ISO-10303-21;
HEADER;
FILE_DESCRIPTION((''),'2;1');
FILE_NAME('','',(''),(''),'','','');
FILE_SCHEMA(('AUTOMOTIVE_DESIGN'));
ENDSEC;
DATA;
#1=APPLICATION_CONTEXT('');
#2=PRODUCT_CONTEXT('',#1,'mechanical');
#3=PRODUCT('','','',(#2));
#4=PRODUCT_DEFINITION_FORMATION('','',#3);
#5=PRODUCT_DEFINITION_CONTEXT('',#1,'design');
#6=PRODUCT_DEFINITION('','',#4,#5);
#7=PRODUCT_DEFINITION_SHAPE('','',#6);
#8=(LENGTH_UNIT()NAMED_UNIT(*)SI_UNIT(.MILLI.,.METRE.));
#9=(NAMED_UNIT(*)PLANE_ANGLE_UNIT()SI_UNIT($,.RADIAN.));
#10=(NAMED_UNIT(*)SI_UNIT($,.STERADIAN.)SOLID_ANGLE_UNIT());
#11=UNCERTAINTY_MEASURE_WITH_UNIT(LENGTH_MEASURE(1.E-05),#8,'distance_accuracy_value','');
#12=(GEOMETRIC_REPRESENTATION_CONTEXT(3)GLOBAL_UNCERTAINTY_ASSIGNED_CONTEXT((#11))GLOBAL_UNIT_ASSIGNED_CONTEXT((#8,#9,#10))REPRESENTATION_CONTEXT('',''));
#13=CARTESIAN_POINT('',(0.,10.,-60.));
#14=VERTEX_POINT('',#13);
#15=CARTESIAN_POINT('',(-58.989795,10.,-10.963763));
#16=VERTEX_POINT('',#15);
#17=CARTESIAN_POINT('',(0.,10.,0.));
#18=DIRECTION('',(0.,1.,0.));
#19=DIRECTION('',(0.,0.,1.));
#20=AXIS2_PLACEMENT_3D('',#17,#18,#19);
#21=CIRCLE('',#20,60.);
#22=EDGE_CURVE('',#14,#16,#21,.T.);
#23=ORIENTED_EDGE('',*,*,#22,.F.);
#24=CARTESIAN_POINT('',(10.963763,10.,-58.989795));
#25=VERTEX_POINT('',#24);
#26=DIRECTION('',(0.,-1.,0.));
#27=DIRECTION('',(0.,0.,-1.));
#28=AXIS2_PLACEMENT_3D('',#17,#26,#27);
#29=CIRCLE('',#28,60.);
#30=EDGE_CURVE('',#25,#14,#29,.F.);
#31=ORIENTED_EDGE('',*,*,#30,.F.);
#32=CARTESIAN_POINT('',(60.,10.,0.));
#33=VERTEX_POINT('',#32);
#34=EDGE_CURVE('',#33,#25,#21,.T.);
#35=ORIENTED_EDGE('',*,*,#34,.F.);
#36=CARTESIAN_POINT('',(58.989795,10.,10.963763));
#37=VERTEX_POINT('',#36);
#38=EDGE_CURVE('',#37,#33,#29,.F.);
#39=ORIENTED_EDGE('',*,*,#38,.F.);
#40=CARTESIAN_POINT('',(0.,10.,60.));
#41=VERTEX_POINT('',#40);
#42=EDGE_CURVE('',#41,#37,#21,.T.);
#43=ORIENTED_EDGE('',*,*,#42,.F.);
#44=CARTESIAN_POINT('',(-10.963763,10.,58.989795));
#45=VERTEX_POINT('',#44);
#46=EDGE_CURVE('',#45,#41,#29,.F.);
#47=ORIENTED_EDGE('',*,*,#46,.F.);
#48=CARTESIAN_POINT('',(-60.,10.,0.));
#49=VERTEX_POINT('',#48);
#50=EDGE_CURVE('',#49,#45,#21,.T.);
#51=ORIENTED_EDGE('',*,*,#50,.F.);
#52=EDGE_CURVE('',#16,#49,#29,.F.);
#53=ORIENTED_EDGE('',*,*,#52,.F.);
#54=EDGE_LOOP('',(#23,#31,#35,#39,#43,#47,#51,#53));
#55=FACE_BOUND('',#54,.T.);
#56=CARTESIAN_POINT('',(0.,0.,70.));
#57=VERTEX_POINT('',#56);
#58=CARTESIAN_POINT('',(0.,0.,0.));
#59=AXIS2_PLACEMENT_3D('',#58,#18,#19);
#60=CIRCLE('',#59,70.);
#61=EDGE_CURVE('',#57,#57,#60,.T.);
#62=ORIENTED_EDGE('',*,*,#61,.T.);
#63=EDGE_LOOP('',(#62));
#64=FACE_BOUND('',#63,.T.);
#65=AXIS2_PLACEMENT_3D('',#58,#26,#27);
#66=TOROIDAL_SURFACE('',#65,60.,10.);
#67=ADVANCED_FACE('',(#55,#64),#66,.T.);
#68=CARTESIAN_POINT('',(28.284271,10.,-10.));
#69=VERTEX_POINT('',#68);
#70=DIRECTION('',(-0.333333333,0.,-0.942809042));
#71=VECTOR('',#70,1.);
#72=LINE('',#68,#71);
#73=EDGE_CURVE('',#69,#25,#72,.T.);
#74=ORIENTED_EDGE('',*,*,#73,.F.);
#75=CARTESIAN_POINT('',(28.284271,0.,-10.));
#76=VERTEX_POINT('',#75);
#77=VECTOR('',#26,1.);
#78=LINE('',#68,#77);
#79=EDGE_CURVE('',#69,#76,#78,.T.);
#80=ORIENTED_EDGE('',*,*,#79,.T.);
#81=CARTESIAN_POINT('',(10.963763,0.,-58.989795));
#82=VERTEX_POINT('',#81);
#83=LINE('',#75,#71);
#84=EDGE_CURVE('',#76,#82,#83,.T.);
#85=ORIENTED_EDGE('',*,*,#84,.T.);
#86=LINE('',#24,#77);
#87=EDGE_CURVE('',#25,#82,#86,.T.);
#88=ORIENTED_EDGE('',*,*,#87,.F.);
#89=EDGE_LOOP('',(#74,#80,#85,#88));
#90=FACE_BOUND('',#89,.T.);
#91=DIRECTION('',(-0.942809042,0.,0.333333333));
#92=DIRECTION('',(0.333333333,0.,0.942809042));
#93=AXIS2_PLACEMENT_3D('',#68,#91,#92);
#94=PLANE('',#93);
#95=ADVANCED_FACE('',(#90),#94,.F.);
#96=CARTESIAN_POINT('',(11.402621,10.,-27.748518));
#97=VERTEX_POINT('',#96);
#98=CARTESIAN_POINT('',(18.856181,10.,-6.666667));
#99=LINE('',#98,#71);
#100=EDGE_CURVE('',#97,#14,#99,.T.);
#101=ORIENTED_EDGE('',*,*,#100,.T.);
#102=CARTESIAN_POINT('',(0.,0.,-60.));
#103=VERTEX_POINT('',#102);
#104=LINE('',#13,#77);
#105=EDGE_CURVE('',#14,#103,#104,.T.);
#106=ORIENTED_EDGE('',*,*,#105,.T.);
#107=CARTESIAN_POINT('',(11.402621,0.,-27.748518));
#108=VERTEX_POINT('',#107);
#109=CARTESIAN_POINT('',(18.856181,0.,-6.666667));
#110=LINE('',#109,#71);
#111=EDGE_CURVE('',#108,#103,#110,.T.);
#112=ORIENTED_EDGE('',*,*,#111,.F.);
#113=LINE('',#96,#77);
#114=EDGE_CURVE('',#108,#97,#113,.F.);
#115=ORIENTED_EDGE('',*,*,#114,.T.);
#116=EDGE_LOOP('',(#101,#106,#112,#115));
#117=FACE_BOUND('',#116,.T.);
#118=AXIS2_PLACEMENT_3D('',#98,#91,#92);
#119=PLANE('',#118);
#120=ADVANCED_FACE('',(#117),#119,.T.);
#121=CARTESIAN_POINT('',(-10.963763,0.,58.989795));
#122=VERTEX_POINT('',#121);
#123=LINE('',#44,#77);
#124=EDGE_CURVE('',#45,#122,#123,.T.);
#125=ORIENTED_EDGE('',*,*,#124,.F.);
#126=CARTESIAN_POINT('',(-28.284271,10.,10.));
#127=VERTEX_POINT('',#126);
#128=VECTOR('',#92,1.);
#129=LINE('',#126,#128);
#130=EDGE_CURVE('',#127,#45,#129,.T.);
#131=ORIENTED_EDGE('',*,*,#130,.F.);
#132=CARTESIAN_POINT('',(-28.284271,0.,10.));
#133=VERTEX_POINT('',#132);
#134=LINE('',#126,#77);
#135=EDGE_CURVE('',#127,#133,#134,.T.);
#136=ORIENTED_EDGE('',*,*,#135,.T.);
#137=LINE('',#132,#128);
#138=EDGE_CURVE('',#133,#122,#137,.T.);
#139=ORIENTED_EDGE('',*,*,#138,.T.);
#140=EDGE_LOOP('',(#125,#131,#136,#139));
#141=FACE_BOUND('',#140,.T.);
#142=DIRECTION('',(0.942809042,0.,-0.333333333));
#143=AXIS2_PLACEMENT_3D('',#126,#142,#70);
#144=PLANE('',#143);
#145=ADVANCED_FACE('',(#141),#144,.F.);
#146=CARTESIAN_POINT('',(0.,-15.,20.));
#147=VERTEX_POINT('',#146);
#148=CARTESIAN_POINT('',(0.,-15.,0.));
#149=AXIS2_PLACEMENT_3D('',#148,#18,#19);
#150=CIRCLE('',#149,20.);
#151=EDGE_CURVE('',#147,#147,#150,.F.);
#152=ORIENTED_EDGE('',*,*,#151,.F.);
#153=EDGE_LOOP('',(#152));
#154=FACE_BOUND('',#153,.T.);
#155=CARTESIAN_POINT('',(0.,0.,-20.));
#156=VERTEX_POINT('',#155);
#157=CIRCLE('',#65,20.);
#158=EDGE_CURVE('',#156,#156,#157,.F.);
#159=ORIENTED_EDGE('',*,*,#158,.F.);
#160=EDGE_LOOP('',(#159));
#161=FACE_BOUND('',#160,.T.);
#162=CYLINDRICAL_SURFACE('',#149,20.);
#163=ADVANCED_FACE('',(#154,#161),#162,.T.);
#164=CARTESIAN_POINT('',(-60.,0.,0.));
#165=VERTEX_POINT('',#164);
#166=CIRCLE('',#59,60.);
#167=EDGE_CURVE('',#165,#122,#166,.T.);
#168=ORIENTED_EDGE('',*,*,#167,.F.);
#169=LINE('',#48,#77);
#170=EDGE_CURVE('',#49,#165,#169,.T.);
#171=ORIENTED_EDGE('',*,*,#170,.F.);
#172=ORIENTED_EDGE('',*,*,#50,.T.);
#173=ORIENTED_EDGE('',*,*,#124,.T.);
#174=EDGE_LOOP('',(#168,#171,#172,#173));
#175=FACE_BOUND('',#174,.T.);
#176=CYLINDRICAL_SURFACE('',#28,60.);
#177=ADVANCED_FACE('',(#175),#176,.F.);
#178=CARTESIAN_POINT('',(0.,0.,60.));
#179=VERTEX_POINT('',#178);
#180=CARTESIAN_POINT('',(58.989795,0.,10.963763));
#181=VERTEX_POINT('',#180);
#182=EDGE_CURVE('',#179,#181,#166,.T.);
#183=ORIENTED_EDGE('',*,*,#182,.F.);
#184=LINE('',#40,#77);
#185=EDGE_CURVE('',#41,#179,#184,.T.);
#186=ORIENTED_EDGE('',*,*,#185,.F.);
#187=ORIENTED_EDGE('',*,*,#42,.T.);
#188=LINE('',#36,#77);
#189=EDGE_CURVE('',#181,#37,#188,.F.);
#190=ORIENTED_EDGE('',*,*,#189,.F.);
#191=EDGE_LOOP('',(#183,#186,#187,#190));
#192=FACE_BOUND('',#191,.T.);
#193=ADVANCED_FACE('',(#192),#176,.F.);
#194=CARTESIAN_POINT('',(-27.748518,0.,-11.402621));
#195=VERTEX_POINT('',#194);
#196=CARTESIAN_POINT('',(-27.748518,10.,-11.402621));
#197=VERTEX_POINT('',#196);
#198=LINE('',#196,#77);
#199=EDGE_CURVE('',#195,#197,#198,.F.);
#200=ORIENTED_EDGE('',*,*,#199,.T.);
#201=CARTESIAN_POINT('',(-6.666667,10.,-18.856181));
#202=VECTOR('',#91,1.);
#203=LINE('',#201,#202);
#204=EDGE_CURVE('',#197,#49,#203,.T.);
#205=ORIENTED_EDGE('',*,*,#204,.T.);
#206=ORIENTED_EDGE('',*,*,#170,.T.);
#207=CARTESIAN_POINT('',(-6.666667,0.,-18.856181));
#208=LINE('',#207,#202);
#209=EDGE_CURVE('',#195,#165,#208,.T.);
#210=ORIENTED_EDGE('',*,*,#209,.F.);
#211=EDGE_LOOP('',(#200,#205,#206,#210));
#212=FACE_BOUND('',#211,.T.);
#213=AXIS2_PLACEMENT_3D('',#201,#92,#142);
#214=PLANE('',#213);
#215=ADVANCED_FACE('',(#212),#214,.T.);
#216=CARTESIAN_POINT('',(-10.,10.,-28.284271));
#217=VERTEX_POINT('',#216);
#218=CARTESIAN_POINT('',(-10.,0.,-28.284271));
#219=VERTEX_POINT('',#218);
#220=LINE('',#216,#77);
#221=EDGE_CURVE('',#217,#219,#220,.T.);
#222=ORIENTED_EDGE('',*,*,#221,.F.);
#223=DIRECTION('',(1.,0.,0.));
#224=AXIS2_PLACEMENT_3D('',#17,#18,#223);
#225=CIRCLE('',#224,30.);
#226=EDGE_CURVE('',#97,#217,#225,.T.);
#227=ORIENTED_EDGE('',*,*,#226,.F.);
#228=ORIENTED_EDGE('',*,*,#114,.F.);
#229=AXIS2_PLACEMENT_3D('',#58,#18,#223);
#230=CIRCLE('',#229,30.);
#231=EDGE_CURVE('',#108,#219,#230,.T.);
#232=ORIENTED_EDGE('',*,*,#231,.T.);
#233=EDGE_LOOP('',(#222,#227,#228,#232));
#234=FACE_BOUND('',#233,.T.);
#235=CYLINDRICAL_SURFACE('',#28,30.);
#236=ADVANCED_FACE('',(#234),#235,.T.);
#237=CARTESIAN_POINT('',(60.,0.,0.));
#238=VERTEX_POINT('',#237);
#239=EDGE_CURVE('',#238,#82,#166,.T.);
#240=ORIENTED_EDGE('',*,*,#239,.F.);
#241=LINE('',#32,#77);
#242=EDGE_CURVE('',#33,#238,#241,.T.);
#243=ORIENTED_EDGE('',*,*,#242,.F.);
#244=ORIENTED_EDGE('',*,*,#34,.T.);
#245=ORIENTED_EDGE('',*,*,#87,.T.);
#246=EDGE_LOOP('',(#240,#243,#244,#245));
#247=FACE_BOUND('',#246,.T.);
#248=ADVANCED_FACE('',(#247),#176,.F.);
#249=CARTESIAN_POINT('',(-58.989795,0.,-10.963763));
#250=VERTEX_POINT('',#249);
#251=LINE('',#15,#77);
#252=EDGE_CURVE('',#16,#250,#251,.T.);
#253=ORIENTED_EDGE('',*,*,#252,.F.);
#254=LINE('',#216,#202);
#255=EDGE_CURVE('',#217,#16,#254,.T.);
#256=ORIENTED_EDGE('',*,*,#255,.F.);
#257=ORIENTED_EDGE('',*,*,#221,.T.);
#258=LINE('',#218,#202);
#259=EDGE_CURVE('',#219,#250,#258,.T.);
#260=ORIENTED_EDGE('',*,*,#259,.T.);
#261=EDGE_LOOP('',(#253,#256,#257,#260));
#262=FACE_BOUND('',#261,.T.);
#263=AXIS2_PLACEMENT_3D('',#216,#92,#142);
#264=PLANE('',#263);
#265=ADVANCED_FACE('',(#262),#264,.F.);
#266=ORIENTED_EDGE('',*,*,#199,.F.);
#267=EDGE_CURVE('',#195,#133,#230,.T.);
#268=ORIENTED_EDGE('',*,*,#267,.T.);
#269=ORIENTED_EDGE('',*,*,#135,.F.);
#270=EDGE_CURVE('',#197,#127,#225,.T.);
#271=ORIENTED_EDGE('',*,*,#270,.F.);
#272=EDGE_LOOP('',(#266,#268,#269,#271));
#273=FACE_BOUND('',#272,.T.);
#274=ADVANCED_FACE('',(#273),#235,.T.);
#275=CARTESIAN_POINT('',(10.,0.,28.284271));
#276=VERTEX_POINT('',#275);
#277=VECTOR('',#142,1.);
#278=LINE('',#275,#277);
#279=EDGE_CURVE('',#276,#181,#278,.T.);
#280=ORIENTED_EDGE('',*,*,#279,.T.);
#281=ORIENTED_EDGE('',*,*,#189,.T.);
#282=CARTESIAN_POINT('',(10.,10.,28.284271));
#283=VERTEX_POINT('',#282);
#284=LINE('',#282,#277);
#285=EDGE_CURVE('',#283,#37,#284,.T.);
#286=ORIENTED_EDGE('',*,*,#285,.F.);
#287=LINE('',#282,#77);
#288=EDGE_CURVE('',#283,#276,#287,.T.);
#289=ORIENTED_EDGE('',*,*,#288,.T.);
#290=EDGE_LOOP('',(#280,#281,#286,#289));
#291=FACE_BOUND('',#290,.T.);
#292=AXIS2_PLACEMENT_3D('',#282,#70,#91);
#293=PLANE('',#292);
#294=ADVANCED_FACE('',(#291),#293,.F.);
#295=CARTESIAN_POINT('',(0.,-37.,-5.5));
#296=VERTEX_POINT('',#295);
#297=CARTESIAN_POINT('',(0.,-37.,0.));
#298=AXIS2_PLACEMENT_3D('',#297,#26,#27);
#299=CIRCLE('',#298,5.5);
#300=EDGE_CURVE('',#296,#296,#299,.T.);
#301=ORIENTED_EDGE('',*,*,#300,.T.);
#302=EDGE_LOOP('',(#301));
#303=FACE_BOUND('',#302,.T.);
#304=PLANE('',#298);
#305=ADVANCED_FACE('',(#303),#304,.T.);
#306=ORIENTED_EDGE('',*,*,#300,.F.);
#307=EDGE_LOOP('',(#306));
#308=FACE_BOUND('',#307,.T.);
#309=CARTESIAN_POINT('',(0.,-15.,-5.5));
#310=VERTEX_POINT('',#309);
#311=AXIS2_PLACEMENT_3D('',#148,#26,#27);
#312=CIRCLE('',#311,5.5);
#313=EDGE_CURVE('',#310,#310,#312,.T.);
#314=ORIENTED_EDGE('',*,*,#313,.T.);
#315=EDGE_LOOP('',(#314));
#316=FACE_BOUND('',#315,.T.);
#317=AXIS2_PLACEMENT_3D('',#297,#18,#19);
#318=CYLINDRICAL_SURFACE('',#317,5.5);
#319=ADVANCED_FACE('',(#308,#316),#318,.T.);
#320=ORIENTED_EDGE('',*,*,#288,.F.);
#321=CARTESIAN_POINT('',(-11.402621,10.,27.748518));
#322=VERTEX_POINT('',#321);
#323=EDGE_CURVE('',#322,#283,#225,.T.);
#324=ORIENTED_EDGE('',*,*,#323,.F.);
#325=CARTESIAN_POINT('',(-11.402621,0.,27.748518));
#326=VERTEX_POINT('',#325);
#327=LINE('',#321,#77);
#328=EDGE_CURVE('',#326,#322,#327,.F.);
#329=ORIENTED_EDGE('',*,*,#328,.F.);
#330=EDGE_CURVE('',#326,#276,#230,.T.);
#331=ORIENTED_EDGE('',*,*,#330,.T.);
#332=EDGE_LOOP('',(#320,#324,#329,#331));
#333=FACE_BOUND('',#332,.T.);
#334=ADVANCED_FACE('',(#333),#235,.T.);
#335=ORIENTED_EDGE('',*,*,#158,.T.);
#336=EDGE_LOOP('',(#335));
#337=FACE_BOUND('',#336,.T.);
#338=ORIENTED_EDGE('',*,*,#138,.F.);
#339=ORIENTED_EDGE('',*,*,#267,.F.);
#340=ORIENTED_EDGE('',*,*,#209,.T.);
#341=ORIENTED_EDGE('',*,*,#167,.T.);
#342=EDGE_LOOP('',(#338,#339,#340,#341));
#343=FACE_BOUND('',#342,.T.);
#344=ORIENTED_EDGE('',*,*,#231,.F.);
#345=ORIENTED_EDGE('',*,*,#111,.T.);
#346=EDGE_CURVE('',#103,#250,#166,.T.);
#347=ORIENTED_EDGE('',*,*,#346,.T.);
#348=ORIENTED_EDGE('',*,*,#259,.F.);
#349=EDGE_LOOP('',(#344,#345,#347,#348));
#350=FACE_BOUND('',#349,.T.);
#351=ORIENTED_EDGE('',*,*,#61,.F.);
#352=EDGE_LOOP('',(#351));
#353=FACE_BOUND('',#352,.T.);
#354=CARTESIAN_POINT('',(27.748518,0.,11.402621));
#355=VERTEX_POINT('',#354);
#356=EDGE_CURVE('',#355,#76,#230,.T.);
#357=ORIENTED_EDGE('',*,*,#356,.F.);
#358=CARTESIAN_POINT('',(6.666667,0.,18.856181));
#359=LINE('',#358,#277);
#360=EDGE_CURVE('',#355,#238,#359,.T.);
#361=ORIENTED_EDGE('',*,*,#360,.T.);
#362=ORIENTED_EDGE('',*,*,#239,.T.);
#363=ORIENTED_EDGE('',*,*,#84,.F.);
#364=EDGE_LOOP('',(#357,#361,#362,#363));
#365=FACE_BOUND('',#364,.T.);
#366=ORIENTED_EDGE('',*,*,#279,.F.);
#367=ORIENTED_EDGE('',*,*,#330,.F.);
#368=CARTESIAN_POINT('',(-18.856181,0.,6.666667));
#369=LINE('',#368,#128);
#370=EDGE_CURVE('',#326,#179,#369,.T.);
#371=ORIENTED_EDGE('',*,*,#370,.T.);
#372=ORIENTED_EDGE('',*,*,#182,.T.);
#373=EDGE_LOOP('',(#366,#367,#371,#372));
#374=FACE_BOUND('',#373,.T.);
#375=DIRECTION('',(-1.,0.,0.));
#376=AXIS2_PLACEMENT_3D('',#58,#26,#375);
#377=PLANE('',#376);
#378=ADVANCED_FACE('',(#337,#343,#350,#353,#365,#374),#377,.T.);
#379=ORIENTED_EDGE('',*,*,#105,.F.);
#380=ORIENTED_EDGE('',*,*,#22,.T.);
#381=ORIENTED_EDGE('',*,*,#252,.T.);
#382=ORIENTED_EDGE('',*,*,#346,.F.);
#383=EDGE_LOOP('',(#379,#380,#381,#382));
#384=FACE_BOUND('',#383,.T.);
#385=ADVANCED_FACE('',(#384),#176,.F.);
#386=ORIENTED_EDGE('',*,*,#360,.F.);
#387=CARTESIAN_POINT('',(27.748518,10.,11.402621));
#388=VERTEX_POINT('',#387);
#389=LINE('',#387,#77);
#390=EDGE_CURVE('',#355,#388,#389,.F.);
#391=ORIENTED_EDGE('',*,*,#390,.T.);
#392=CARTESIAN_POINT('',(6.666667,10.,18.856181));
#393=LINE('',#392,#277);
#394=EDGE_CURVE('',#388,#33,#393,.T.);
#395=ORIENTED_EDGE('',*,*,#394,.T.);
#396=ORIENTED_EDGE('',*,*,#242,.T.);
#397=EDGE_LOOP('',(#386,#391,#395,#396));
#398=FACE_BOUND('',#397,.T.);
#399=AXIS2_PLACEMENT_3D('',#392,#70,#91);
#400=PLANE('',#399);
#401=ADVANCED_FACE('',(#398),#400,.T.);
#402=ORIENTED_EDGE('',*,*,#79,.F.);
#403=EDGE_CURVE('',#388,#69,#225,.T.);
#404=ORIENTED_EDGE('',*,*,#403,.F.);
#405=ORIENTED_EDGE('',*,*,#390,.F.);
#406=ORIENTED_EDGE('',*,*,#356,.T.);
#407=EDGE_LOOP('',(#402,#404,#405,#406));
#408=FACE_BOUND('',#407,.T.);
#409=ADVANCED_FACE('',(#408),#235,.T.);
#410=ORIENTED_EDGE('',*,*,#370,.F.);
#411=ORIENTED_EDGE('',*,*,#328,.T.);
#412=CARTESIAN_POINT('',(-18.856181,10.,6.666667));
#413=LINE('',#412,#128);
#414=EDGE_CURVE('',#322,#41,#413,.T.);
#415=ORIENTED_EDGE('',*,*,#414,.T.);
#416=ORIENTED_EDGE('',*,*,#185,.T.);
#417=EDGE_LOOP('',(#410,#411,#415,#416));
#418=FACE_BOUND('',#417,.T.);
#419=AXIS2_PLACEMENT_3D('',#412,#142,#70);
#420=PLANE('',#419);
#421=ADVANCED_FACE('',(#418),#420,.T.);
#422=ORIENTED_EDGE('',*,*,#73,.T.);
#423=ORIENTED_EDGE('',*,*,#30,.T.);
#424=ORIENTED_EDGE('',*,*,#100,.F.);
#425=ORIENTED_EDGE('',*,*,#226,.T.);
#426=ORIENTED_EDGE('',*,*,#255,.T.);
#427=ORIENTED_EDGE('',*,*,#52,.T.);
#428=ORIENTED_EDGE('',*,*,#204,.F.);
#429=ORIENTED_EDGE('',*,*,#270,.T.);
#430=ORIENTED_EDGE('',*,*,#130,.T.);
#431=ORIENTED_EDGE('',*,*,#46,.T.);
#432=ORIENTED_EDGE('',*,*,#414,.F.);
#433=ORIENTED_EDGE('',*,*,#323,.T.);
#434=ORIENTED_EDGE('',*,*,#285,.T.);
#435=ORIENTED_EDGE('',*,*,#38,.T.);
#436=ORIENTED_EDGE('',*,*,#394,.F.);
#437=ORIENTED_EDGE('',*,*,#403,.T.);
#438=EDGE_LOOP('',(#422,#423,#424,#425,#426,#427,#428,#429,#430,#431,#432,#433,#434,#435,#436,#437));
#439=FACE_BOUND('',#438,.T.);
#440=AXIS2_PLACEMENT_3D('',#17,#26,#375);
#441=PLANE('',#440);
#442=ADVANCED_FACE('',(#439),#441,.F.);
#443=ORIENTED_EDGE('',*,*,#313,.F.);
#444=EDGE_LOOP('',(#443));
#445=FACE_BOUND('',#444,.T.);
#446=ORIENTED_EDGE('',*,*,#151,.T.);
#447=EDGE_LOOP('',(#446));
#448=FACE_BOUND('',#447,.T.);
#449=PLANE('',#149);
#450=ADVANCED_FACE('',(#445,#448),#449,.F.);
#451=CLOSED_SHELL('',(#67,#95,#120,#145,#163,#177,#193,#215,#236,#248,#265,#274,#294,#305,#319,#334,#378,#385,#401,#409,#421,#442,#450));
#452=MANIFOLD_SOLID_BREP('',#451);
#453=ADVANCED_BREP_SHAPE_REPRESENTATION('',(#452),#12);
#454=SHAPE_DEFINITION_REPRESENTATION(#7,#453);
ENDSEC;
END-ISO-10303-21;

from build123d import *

# Parameters (mm, degrees)
SKETCH5_R           = 30
SKETCH5_R_2         = 20
EXTRUDE_THIN2_DEPTH = 10
SKETCH2_R           = 70
SKETCH2_R_2         = 60
BOSS_EXTRUDE3_DEPTH = 10
CIRPATTERN1_COUNT   = 4
BOSS_EXTRUDE4_START = -25
SKETCH6_R           = 20
BOSS_EXTRUDE4_DEPTH = 25
FILLET2_R           = 10
SKETCH7_R           = 5.5
BOSS_EXTRUDE5_DEPTH = 22


with BuildPart() as part:
    # Sketch5 → Extrude-Thin2 (new body)
    # profile 1 of 2: a face of its own
    with BuildSketch(Plane(origin=(0, 0, 0), x_dir=(1, 0, 0), z_dir=(0, 1, 0))):
        Circle(SKETCH5_R)
        Circle(SKETCH5_R_2, mode=Mode.SUBTRACT)
    # profile 2 of 2: a face of its own
    with BuildSketch(Plane(origin=(0, 0, 0), x_dir=(1, 0, 0), z_dir=(0, 1, 0))):
        Polygon((6.666666667, -18.856180832), (60, 0), (63.333333333, -9.428090416), (10, -28.284271247), align=None)
    extrude_thin2 = extrude(amount=EXTRUDE_THIN2_DEPTH)

    # Sketch2 → Boss-Extrude3 (add)
    with BuildSketch(Plane(origin=(0, 0, 0), x_dir=(1, 0, 0), z_dir=(0, 1, 0))):
        with Locations(Location((0, 0, 0), (0, 0, 270))):
            Circle(SKETCH2_R)
        Circle(SKETCH2_R_2, mode=Mode.SUBTRACT)
    extrude(amount=BOSS_EXTRUDE3_DEPTH)

    # CirPattern1: Extrude-Thin2 ×4 about axis
    cirpattern1_axis = Axis((0, 0, 0), (0, 1, 0))
    for i in range(1, CIRPATTERN1_COUNT):
        add(extrude_thin2.rotate(cirpattern1_axis, i * 360 / CIRPATTERN1_COUNT))

    # Sketch6 → Boss-Extrude4 (add)
    with BuildSketch(Plane(origin=(0, 10, 0), x_dir=(1, 0, 0), z_dir=(0, 1, 0)).offset(BOSS_EXTRUDE4_START)):
        with Locations(Location((0, 0, 0), (0, 0, 270))):
            Circle(SKETCH6_R)
    extrude(amount=BOSS_EXTRUDE4_DEPTH)

    # Fillet2
    fillet2_edges = [part.edges().sort_by_distance(p)[0] for p in [
        (0, 10, -70),
    ]]
    fillet(fillet2_edges, radius=FILLET2_R - 0.0001)  # a hair under: the kernel refuses the full size

    # Sketch7 → Boss-Extrude5 (add)
    with BuildSketch(Plane.XZ.offset(15)):
        with Locations(Location((0, 0, 0), (0, 0, 270))):
            Circle(SKETCH7_R)
    extrude(amount=BOSS_EXTRUDE5_DEPTH)


solid = part.part
